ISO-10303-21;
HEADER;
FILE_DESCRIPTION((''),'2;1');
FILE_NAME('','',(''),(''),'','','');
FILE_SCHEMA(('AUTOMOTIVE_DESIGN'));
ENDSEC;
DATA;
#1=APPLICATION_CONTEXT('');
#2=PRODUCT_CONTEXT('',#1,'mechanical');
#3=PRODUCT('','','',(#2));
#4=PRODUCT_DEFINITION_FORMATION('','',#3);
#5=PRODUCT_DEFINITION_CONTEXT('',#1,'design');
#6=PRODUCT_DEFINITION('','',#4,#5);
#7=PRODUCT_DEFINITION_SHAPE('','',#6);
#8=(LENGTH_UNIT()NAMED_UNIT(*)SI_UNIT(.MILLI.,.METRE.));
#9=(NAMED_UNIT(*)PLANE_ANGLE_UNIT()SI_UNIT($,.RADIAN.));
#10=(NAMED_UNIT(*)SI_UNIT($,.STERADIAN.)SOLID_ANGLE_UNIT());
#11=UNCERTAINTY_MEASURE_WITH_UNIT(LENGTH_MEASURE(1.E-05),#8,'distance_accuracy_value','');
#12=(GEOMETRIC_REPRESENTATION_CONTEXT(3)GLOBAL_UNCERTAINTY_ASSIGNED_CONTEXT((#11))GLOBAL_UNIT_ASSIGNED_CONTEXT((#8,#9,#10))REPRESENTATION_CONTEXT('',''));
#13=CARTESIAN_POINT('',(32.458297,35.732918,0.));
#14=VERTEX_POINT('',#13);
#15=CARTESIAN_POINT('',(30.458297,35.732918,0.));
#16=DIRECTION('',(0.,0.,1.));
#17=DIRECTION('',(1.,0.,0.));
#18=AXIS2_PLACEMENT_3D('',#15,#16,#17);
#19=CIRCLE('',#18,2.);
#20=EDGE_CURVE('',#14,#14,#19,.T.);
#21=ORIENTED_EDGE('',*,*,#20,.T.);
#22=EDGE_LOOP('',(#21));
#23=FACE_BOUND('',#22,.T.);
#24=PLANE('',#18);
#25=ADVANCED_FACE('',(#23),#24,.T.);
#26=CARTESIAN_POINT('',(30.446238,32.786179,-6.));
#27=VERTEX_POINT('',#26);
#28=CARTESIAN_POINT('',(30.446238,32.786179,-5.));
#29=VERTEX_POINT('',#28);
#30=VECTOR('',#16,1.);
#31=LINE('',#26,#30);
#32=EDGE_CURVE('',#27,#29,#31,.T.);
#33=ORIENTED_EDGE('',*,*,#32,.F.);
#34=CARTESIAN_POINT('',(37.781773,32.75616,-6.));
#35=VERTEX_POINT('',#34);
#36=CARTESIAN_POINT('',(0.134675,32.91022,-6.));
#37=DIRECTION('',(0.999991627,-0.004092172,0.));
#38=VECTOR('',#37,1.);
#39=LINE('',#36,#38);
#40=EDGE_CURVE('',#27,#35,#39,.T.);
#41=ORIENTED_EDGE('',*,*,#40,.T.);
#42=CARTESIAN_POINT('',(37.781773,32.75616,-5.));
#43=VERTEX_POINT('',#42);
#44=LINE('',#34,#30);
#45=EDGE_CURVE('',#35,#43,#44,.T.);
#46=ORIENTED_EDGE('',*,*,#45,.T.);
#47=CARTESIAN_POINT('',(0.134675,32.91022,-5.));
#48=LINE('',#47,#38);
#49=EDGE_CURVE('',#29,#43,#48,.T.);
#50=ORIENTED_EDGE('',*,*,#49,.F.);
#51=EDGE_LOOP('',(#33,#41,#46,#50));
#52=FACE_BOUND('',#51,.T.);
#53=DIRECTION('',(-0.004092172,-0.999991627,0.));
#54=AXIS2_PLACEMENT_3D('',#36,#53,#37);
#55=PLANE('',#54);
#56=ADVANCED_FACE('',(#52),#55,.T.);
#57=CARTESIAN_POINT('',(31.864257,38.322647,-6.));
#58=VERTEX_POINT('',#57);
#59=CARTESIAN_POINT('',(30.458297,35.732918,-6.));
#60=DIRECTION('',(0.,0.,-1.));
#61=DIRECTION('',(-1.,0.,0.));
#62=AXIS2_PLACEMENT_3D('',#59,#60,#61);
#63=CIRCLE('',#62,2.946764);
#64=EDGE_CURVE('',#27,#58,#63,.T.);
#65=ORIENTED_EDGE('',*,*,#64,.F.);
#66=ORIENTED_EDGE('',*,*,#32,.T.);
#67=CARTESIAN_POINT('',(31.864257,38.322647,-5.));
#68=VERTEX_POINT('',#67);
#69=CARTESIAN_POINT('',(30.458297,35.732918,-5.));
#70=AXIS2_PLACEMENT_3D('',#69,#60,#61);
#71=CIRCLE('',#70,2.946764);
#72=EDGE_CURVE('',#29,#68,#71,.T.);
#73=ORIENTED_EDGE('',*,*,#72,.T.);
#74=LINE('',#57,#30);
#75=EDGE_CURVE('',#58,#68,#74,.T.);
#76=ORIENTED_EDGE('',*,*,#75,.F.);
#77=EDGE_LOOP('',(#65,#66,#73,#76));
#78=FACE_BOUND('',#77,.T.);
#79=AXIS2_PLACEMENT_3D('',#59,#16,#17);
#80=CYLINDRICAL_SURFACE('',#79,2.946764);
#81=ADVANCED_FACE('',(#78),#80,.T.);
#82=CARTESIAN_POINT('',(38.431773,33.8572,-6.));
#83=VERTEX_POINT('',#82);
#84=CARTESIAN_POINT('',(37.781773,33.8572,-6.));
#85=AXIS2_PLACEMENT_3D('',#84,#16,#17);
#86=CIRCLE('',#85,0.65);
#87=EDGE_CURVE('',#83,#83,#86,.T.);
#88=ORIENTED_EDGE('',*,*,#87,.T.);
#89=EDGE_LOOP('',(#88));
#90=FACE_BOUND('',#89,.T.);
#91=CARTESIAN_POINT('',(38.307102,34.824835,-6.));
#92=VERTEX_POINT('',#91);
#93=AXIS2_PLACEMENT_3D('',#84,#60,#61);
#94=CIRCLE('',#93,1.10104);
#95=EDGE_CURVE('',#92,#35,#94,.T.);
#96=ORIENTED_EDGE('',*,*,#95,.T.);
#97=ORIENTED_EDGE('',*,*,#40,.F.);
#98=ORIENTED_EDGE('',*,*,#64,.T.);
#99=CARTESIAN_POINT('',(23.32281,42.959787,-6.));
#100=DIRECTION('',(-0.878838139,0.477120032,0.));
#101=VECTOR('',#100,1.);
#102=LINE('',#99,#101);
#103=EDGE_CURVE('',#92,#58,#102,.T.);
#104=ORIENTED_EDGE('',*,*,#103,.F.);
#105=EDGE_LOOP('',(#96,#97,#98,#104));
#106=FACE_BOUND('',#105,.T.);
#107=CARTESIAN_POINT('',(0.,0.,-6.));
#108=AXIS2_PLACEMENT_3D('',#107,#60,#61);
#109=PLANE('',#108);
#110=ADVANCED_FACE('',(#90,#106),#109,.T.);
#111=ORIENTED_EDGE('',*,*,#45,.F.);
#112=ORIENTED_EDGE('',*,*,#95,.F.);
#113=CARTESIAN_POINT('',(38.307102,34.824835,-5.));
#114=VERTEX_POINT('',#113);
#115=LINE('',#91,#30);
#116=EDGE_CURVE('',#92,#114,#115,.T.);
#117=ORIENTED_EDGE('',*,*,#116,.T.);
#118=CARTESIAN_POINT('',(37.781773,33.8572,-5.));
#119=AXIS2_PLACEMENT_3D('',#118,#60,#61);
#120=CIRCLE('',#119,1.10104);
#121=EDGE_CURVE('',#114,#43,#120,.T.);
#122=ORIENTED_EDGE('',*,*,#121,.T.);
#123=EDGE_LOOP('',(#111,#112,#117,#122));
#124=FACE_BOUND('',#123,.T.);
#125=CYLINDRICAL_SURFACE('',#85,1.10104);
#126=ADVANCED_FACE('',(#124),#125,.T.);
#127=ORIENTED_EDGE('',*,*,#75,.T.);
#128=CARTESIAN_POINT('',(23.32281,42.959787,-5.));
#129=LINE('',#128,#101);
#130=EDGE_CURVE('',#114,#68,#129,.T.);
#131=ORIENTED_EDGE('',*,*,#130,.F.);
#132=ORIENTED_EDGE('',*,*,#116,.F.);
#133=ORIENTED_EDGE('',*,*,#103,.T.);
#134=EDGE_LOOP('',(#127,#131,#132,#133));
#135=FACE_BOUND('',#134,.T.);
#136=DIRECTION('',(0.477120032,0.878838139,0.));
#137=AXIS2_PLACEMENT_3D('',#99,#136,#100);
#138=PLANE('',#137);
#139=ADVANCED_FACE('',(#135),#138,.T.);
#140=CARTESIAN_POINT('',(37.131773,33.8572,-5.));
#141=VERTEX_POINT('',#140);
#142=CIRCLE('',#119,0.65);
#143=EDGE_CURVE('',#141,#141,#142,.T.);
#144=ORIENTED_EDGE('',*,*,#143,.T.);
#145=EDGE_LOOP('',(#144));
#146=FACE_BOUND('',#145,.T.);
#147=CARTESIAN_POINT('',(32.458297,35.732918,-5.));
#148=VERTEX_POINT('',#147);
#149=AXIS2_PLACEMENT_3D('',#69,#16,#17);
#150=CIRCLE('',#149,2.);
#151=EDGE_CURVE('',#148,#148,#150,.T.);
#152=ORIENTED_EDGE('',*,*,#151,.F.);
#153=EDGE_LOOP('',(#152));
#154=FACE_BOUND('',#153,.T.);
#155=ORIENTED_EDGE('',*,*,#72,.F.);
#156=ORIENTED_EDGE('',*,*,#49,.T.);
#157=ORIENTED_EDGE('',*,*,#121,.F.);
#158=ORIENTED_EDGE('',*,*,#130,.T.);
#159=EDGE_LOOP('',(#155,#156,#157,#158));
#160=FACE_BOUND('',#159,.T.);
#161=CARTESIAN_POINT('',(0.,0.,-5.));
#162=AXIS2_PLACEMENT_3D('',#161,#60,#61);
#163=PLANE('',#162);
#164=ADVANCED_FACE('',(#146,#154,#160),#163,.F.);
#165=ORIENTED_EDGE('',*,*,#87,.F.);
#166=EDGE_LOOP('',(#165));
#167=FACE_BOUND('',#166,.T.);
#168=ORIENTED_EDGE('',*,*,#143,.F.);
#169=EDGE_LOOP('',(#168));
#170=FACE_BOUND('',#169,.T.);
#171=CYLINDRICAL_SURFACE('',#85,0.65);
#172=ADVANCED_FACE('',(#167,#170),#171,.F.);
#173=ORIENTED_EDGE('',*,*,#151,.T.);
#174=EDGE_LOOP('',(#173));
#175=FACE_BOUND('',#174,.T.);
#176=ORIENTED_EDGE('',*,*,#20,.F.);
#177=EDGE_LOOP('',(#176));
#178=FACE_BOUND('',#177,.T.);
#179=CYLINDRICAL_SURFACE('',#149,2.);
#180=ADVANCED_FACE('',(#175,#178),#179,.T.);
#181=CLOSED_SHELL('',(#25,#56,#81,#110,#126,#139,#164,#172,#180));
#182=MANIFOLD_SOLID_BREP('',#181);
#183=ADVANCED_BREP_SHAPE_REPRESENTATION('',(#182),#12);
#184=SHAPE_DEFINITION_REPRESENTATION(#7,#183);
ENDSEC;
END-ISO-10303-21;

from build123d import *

# Parameters (mm, degrees)
SKETCH1_R               = 2
BOSS_EXTRUDE1_DEPTH     = 5
BOSS_EXTRUDE2_DEPTH     = 1
CUT_EXTRUDE1_DEPTH      = 56.072597377
CUT_EXTRUDE1_DEPTH_BACK = 56.072597377
SKETCH3_R               = 0.65


# Read off the part's stored shape, not the designer's step: Boss-Extrude2
with BuildPart() as part:
    # Sketch1 → Boss-Extrude1 (new body)
    with BuildSketch(Plane.XY):
        with Locations((30.458296942, 35.732918139)):
            Circle(SKETCH1_R)
    extrude(amount=-BOSS_EXTRUDE1_DEPTH)

    # Boss-Extrude2 outline → Boss-Extrude2 (add)
    with BuildSketch(Plane(origin=(0, 0, -5), x_dir=(-1, 0, 0), z_dir=(0, 0, -1))):
        with BuildLine():
            ThreePointArc((-38.30710157, 34.824835399), (-38.848941129, 33.586198742), (-37.781773498, 32.756160115))
            Line((-37.781773498, 32.756160115), (-30.446238276, 32.786178641))
            ThreePointArc((-30.446238276, 32.786178641), (-27.603676035, 36.464053256), (-31.864257159, 38.32264688))
            Line((-31.864257159, 38.32264688), (-38.30710157, 34.824835399))
        make_face()
    extrude(amount=BOSS_EXTRUDE2_DEPTH)

    # Sketch3 → Cut-Extrude1 (cut, two sides: drawn at the far end of the back side and taken through both)
    with BuildSketch(Plane.XY.offset(-5).offset(-CUT_EXTRUDE1_DEPTH_BACK)):
        with Locations((37.781773498, 33.857199764)):
            Circle(SKETCH3_R)
    extrude(amount=CUT_EXTRUDE1_DEPTH + CUT_EXTRUDE1_DEPTH_BACK, mode=Mode.SUBTRACT)


solid = part.part
